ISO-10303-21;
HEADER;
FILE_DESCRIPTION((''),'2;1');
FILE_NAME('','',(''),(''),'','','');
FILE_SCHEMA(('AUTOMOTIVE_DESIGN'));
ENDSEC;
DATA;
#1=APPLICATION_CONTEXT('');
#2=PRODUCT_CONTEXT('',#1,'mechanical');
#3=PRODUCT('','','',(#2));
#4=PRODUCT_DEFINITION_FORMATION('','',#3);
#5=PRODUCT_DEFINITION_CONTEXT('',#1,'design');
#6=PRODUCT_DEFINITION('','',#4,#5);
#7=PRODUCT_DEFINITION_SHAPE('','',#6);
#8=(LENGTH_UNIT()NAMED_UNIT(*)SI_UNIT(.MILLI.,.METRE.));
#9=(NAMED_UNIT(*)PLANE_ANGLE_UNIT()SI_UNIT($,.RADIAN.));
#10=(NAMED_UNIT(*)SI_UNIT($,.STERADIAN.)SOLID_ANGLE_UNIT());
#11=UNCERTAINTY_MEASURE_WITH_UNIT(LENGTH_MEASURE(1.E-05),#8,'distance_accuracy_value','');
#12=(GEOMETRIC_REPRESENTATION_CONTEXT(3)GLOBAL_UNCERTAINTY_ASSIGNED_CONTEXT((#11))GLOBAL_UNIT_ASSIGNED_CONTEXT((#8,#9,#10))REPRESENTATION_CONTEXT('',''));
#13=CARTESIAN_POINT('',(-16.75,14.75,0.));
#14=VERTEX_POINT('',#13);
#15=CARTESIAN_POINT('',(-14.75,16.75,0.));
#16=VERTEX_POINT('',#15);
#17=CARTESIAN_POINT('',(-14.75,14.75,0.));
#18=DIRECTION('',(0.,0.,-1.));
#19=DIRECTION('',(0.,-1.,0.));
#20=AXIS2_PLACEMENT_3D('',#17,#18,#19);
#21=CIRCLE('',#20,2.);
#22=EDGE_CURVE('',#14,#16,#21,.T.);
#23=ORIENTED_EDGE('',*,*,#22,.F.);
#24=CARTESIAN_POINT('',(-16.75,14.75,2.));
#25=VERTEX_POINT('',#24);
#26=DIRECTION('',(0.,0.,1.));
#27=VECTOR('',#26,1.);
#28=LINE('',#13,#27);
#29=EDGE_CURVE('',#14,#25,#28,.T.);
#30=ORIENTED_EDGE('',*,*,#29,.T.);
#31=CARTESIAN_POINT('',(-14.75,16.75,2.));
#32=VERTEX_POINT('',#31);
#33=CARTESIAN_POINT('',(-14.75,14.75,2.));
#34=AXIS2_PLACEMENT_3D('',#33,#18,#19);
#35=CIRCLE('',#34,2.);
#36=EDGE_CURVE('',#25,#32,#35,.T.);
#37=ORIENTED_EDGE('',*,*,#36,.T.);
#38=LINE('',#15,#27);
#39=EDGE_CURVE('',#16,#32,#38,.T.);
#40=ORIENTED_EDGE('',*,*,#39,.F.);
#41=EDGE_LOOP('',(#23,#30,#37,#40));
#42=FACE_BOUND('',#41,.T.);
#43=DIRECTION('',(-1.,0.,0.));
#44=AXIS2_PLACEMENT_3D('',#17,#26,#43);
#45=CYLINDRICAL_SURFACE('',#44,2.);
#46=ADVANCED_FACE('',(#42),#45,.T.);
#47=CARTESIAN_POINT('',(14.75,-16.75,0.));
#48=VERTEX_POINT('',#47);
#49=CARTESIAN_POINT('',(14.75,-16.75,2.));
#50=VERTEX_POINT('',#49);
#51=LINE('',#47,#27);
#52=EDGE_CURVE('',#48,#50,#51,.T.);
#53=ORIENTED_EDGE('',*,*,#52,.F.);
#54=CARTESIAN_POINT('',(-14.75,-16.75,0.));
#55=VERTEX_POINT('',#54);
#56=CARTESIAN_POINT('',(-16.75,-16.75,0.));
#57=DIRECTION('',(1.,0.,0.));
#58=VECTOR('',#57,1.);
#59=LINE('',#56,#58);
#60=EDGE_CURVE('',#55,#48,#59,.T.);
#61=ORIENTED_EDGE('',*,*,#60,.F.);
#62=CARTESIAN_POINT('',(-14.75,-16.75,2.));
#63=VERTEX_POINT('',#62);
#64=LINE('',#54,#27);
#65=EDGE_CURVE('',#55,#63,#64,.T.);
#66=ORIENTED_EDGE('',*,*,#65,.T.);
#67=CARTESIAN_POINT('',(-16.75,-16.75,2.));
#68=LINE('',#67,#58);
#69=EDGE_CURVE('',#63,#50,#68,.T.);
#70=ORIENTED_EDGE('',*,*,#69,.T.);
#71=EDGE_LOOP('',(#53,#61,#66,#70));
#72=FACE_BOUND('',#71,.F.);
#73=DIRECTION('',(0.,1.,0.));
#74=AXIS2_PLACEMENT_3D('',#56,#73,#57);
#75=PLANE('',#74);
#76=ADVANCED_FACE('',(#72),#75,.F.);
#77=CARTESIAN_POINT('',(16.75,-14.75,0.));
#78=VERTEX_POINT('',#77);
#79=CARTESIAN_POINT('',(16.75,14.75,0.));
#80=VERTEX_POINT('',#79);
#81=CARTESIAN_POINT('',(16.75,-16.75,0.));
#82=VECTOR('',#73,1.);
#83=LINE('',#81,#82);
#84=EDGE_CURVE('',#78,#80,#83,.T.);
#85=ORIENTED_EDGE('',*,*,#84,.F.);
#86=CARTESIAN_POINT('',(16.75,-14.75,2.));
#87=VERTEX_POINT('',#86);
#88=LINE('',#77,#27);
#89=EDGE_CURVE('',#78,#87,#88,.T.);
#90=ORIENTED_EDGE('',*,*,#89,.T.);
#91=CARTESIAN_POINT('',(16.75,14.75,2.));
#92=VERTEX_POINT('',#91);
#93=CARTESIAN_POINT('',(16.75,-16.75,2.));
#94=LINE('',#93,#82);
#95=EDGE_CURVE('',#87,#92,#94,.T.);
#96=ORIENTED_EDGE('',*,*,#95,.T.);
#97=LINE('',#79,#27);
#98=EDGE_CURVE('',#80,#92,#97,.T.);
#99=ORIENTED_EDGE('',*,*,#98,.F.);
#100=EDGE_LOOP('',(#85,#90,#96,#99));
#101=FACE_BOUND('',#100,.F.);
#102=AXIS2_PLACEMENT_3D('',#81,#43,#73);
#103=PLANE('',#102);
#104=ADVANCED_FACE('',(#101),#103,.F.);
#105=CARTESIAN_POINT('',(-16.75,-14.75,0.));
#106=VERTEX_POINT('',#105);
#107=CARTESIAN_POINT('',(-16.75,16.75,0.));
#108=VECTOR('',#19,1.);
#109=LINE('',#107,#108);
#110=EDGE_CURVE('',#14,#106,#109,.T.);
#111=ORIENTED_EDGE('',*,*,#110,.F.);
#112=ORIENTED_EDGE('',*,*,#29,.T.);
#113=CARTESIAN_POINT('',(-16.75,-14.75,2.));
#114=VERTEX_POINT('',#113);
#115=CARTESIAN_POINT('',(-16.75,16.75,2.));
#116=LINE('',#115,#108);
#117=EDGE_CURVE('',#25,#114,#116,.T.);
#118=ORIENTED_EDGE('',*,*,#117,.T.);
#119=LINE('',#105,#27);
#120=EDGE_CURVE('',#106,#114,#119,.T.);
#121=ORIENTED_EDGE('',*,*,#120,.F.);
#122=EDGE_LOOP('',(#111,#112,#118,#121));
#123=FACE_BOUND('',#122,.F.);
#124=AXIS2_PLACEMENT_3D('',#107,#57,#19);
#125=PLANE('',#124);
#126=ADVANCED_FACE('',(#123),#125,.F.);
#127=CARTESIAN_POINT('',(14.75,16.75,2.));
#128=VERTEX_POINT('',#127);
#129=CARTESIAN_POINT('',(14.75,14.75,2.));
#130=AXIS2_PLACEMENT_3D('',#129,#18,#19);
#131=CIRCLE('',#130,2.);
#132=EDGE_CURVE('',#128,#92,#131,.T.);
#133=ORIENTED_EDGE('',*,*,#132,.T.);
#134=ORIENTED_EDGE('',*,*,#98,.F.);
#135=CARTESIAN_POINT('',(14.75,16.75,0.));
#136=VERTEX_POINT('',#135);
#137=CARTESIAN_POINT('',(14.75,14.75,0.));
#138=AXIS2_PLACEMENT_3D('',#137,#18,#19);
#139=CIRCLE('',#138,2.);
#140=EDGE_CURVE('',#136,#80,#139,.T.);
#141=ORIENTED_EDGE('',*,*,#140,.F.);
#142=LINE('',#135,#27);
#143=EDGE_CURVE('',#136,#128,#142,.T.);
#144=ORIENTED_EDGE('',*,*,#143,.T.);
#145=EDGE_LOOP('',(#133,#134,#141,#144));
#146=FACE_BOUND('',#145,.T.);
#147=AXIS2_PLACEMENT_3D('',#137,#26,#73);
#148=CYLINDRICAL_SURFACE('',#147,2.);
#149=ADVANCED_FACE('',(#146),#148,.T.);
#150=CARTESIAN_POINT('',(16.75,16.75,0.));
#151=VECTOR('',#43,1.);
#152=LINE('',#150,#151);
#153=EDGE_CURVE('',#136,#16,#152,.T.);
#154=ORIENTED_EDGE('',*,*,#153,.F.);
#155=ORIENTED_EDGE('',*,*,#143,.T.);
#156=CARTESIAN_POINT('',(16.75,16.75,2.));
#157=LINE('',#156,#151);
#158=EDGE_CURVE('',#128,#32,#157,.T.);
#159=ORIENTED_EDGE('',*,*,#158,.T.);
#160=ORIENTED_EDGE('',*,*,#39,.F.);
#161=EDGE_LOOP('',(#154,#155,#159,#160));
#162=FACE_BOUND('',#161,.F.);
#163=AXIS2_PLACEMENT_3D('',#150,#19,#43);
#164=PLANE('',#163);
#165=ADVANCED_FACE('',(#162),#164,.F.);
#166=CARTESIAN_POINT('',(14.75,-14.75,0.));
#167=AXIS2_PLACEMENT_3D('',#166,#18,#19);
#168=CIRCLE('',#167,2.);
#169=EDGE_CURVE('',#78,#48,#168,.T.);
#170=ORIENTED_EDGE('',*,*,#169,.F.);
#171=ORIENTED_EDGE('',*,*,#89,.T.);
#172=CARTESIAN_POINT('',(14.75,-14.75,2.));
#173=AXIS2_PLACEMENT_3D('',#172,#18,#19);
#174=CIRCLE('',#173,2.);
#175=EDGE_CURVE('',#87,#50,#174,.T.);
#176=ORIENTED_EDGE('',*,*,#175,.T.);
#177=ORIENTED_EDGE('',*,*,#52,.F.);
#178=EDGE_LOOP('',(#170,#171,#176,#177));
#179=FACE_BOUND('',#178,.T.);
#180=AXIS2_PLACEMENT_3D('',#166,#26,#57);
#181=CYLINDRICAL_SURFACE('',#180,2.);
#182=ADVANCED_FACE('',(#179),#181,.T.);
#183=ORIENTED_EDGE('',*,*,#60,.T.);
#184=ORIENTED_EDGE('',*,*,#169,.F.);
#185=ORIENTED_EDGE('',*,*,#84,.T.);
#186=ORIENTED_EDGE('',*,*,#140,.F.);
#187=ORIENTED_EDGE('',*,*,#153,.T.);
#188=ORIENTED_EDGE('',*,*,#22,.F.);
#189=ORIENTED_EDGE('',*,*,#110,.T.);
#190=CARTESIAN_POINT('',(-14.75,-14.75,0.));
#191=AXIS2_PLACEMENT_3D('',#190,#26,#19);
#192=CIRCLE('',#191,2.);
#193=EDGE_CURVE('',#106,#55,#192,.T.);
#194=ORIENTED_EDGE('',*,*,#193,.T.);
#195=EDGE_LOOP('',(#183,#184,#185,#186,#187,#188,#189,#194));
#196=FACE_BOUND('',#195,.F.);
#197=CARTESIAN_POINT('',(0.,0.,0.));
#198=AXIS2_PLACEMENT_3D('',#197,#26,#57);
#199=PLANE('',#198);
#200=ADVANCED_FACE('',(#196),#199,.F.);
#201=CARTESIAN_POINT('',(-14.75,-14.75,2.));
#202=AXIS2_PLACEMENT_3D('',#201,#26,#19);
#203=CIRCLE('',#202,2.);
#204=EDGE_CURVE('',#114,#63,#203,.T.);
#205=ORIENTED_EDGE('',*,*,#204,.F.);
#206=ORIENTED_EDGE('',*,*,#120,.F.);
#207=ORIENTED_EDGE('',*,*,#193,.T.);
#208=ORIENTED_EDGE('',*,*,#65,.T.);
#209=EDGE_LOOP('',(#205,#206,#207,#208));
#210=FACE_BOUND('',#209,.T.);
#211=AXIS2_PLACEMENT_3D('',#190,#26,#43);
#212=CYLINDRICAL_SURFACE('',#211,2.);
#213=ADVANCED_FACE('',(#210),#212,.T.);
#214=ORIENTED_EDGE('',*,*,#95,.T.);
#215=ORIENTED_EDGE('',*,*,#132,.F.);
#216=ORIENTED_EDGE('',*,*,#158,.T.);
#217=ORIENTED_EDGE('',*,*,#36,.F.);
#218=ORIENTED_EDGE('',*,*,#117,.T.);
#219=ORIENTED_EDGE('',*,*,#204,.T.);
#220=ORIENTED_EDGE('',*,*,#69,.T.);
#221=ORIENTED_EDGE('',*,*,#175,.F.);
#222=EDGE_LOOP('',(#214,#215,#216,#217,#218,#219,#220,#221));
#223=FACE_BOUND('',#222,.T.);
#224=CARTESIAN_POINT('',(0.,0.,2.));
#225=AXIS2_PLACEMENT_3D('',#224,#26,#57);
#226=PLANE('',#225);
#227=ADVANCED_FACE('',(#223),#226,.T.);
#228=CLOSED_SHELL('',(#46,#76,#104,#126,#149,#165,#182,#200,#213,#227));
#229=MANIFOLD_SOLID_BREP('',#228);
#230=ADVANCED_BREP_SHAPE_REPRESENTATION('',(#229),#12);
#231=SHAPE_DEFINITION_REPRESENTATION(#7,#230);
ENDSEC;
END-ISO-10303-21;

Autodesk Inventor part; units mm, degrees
ref_plane "YZ Plane" through (0, 0, 0) normal (1, 0, 0) x (0, 1, 0)
ref_plane "XZ Plane" through (0, 0, 0) normal (0, 1, 0) x (-1, 0, 0)
ref_plane "XY Plane" through (0, 0, 0) normal (0, 0, 1) x (1, 0, 0)
sketch "Sketch1" plane through (0, 0, 0) normal (0, 0, 1) x (1, 0, 0)
  line L0 (-16.75, -16.75) -> (16.75, -16.75)
  line L1 (16.75, -16.75) -> (16.75, 16.75)
  line L2 (16.75, 16.75) -> (-16.75, 16.75)
  line L3 (-16.75, 16.75) -> (-16.75, -16.75)
  line L4 (-16.75, -16.75) -> (16.75, 16.75) construction
  line L5 (16.75, -16.75) -> (-16.75, 16.75) construction
  point P0 (0, 0)
  dimension "d154" = 33.5
  dimension "d155" = 33.5
extrude "Plate5" add sketch "Sketch1" along normal blind 2
fillet "Corner Round1" radius 2 4 edges at (16.75, 16.75, 1) (-16.75, 16.75, 1) (-16.75, -16.75, 1) (16.75, -16.75, 1)
properties part number "ANP 1426 FDS way cup" material "Stainless Steel"
